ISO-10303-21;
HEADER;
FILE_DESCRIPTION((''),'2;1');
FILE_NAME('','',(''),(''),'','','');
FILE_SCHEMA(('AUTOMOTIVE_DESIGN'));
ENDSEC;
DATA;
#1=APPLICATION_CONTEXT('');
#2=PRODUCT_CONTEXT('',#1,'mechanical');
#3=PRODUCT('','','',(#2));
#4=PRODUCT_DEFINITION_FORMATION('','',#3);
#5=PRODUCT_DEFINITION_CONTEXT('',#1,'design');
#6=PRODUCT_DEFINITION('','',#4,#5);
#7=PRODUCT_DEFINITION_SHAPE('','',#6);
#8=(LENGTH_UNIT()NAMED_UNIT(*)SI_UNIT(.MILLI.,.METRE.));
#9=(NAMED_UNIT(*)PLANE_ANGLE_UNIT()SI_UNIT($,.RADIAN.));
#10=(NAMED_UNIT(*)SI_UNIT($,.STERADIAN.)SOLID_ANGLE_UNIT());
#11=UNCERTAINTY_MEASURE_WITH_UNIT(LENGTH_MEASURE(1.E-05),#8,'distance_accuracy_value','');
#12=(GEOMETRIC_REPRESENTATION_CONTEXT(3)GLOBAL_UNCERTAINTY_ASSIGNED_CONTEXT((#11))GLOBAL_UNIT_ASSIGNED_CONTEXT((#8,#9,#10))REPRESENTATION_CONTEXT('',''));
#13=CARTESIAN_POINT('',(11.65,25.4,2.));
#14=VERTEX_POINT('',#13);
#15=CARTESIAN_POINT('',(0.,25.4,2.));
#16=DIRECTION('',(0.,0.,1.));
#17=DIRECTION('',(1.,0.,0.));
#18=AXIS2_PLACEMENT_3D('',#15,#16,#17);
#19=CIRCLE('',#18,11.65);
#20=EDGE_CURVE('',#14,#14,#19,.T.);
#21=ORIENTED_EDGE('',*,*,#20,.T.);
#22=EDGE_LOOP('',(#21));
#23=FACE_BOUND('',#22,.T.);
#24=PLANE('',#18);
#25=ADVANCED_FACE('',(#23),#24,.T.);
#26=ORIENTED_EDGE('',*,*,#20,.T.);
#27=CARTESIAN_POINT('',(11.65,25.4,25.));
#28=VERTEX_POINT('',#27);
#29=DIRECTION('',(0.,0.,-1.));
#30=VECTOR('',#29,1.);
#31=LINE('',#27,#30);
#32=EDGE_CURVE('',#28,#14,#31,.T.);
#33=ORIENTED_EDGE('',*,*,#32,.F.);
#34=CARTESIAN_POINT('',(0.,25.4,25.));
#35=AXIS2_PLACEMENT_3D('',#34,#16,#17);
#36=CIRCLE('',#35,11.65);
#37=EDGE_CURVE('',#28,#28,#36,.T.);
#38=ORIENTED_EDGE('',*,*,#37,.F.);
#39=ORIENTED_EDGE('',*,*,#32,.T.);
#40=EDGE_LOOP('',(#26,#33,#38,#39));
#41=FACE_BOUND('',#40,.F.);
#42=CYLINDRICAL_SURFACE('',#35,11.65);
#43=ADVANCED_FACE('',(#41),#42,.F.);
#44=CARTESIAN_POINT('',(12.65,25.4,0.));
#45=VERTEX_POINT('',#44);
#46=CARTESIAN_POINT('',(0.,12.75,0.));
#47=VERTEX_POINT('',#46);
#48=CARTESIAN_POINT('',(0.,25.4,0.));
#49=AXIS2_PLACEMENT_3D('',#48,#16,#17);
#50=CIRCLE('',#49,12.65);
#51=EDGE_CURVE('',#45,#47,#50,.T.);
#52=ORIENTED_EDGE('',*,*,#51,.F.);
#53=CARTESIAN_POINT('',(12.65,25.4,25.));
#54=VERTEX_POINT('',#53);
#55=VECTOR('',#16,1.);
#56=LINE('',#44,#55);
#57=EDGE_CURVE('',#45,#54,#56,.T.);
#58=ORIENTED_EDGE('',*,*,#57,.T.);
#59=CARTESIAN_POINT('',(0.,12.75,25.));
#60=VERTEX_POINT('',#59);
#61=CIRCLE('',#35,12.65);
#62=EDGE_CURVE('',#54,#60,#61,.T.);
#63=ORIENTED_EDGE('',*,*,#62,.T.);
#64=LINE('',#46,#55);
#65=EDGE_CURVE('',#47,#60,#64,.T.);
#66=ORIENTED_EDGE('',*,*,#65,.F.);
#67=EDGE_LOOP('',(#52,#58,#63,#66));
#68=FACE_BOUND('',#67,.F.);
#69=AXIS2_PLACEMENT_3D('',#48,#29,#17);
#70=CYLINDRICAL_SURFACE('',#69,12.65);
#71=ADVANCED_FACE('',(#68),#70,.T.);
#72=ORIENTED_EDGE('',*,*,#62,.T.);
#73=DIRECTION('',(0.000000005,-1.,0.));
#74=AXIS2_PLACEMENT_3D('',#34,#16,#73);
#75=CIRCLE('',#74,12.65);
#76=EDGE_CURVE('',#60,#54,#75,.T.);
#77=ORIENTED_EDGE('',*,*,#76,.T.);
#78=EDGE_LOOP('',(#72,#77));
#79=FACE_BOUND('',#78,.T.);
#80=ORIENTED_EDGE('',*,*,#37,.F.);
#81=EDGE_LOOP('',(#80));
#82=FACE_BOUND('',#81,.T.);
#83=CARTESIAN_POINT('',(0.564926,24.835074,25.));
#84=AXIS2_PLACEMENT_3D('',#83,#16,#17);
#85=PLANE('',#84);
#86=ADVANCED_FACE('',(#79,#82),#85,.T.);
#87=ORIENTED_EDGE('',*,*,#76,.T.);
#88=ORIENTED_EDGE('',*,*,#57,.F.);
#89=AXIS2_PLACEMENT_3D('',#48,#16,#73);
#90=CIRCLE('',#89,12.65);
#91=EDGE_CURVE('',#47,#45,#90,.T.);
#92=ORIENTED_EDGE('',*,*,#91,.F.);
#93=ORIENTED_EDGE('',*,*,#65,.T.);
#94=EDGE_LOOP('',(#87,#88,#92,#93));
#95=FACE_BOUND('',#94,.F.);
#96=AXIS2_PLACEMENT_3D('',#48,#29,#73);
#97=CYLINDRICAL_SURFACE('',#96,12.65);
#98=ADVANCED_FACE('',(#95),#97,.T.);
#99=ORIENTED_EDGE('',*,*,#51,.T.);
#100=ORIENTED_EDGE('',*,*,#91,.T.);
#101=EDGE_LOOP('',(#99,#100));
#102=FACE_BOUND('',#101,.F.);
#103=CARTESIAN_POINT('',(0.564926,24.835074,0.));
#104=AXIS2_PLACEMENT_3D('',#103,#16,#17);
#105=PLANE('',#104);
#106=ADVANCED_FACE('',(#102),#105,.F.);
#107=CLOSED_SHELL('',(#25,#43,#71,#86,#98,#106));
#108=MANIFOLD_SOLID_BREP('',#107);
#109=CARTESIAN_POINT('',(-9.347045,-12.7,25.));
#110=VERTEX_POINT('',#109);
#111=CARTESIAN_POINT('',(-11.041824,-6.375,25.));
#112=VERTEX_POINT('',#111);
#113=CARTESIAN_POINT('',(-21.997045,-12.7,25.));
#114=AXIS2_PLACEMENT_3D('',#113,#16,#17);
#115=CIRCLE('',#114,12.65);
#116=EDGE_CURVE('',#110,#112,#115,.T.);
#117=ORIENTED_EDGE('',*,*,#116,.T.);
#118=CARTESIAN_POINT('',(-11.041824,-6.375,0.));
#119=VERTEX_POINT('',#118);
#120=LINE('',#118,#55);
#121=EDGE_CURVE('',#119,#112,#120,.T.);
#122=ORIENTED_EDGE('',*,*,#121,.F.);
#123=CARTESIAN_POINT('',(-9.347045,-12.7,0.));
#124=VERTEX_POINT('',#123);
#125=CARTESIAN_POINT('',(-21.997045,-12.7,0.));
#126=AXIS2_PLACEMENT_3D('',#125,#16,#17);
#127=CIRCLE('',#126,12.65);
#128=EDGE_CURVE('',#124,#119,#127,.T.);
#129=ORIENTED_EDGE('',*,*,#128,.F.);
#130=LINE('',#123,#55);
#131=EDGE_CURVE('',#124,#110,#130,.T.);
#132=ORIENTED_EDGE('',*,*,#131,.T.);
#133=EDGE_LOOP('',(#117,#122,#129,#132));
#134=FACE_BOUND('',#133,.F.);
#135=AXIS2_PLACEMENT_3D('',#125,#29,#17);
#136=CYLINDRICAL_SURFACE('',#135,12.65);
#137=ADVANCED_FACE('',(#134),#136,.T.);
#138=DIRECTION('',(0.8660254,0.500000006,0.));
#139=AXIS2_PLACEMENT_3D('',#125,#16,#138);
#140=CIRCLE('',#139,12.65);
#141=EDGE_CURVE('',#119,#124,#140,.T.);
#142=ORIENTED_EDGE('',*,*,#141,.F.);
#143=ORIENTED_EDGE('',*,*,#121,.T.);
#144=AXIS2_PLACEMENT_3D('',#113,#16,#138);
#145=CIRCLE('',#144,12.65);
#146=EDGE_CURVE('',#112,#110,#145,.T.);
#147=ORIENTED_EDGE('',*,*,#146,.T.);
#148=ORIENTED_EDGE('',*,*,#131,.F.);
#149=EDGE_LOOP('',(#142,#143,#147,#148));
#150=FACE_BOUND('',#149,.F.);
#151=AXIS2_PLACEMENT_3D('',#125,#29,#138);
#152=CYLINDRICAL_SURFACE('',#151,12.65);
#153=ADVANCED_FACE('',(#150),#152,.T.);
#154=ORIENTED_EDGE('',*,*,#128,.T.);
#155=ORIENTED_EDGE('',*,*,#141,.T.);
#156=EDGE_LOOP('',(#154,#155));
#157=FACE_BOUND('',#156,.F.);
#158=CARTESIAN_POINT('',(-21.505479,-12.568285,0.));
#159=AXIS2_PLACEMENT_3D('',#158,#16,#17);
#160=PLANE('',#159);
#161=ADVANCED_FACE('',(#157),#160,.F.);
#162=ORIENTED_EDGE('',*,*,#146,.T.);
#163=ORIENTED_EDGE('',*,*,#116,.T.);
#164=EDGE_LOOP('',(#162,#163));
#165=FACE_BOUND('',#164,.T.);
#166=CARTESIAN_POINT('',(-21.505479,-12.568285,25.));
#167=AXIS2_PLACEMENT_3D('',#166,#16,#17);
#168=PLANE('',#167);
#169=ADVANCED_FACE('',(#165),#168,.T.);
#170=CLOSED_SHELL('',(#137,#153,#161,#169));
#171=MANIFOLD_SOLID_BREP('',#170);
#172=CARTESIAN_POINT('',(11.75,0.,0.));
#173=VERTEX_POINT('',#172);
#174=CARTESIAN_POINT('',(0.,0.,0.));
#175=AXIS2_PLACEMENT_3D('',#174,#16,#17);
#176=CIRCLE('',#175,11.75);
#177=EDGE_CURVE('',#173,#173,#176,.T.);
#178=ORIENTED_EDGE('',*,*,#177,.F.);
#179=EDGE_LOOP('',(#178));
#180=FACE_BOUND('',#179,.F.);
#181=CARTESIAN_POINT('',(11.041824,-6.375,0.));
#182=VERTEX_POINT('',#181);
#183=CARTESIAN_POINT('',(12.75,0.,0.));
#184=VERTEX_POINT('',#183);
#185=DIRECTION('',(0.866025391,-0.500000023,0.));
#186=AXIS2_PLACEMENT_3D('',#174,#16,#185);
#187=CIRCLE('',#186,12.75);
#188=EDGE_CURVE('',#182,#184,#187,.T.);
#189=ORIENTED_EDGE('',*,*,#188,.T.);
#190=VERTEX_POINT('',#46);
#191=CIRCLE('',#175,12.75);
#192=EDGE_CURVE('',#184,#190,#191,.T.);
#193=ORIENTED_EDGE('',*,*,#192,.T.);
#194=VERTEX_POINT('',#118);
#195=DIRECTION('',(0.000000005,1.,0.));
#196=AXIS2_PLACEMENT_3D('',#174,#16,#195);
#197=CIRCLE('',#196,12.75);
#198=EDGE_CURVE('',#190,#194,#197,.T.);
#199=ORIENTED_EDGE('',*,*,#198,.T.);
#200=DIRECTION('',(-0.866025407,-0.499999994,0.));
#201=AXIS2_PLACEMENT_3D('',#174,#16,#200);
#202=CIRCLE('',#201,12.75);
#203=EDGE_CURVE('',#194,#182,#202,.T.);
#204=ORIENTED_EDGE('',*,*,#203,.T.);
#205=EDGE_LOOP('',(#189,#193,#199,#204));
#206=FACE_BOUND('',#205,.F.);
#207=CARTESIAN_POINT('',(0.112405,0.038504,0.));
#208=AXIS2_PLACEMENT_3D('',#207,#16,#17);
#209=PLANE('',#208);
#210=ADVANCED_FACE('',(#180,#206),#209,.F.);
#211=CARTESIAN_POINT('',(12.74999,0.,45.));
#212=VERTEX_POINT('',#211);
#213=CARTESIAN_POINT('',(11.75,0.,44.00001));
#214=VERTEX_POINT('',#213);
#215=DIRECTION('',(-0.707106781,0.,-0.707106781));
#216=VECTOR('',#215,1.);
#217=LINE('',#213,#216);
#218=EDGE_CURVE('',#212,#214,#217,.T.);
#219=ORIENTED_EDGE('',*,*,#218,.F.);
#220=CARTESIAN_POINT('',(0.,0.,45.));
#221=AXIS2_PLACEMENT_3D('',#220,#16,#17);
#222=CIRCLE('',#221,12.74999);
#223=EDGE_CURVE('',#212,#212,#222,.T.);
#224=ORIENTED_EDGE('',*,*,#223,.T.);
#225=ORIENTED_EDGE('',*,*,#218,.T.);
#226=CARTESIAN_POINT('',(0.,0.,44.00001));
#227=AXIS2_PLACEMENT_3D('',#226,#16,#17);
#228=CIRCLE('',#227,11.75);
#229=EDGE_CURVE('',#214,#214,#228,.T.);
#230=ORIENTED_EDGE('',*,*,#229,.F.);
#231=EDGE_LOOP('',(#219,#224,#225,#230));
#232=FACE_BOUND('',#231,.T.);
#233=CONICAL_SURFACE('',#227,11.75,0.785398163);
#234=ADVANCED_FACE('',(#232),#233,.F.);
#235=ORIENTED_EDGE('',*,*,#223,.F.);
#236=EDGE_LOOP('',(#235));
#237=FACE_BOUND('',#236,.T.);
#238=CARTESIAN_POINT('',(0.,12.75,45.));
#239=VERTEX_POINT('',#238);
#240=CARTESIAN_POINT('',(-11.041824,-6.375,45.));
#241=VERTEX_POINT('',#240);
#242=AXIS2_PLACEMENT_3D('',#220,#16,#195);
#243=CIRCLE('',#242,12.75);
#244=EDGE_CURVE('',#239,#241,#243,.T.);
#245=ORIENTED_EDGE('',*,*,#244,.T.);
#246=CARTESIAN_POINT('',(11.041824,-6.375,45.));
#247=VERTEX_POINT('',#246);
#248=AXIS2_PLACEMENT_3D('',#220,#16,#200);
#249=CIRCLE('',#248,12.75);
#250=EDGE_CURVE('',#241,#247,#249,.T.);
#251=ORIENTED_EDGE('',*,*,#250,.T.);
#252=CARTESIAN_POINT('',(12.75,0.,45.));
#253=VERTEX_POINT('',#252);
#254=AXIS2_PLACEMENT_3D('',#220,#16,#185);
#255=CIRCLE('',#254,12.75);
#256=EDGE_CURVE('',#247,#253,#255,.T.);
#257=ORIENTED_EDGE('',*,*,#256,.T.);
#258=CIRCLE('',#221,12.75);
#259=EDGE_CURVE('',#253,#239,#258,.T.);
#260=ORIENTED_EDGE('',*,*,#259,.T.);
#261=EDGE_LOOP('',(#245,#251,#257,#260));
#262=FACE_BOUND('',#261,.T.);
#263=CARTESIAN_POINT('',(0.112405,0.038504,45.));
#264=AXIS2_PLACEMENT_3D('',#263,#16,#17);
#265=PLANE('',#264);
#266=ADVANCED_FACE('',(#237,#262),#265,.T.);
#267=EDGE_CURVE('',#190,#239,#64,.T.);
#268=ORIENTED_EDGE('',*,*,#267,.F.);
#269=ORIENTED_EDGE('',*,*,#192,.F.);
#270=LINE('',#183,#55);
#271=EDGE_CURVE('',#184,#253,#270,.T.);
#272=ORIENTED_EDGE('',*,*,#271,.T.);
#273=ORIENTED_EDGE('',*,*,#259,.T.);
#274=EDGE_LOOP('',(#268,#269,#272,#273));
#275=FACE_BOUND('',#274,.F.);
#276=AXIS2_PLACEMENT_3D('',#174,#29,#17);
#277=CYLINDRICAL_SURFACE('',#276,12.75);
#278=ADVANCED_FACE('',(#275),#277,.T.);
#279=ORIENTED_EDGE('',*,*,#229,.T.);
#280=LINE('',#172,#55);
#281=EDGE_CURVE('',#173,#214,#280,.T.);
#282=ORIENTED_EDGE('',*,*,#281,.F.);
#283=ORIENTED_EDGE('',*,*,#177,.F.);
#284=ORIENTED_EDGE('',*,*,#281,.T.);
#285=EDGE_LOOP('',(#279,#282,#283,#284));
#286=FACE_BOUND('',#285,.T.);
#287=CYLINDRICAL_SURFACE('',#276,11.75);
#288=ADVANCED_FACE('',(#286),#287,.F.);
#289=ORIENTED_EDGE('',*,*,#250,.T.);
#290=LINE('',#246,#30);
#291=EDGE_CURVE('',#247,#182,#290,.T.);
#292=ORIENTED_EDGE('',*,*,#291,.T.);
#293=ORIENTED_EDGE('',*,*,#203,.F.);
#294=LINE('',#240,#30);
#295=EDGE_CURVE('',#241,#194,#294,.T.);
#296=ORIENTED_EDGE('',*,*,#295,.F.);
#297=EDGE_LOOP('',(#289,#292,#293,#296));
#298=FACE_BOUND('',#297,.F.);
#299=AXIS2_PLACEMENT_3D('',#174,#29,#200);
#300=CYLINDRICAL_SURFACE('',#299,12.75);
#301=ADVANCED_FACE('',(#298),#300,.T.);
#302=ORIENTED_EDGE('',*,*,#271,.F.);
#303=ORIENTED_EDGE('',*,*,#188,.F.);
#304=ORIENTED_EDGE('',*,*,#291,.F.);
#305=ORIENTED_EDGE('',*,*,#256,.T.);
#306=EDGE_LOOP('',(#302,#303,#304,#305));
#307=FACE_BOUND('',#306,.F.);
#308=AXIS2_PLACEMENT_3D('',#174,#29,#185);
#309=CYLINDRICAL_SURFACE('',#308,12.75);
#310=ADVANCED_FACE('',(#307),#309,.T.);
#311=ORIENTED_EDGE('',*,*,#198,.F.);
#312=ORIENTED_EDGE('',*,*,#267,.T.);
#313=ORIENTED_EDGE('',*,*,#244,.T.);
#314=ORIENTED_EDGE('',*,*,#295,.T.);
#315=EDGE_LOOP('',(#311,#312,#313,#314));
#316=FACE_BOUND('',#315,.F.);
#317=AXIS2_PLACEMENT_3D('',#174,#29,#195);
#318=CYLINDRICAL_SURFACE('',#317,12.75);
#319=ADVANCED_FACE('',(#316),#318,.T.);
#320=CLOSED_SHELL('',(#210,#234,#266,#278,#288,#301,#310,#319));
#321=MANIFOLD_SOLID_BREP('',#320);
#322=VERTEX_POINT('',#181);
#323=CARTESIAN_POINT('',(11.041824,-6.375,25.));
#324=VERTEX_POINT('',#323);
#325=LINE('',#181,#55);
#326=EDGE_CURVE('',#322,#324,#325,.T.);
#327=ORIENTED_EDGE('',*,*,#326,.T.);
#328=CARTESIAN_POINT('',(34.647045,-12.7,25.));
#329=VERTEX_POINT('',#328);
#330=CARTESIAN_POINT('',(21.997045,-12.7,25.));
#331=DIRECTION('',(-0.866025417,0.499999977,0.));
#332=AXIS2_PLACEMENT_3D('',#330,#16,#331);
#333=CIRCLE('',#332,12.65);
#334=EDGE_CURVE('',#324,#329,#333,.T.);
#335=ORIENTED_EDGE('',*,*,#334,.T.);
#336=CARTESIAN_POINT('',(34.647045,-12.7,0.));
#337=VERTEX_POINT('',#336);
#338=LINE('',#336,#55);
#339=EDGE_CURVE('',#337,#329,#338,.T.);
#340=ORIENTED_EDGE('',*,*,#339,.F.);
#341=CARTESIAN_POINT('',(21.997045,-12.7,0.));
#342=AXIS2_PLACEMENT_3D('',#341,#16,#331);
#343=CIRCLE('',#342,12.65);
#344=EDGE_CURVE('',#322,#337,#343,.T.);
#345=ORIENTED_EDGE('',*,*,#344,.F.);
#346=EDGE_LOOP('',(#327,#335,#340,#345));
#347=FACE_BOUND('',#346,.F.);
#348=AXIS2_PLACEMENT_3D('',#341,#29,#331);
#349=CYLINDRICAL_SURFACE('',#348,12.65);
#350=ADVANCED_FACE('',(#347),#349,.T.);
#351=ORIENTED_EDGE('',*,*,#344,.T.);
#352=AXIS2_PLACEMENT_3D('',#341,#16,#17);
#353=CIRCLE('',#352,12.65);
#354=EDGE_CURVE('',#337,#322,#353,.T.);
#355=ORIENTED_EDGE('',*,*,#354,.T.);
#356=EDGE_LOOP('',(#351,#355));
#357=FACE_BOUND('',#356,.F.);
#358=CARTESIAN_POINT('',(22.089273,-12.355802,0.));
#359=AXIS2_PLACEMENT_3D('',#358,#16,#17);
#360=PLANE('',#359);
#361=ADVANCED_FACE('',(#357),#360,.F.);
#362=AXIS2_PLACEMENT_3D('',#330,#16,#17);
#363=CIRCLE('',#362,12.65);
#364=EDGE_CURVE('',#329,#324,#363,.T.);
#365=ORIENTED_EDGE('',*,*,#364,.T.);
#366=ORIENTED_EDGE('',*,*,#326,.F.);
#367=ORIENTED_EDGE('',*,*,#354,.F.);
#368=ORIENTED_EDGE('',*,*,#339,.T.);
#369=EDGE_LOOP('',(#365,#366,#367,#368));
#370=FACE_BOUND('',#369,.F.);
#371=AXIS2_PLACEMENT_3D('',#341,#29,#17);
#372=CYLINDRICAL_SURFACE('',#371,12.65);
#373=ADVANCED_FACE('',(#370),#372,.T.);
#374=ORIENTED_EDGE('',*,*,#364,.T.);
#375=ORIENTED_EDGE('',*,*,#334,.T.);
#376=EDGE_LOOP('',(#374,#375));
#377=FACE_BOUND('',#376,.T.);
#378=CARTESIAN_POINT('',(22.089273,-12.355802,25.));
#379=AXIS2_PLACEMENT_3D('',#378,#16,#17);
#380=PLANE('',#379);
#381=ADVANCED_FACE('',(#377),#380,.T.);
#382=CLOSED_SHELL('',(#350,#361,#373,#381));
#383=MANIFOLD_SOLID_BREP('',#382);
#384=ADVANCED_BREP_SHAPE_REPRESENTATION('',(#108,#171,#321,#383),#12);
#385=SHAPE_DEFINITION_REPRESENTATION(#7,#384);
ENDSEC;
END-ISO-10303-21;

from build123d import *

# Parameters (mm, degrees)
F0_R     = 11.75
F1_DEPTH = 45
F2_DEPTH = 25
F3_SIZE  = 0.99999
F4_R     = 11.65
F5_DEPTH = 23


# Not quite as in the source:
# - a fillet or chamfer is up to 0.001 mm smaller than in the source, because OpenCascade refuses the exact size
# - a feature names something its author has since deleted; it is built from what else it names


with BuildPart() as f1:
    # F0 (on Top) → F1 (new body)
    with BuildSketch(Plane.XY):
        with BuildLine():
            ThreePointArc((11.0418237302, -6.3750002911), (12.3155542417, -3.2999429874), (12.75, 0))
            ThreePointArc((12.75, 0), (9.0156114816, 9.0156114386), (6.08e-08, 12.75))
            ThreePointArc((6.08e-08, 12.75), (-11.0418238613, 6.375000064), (-11.0418239417, -6.3749999247))
            ThreePointArc((-11.0418239417, -6.3749999247), (-2.116e-07, -12.75), (11.0418237302, -6.3750002911))
        make_face()
        Circle(F0_R, mode=Mode.SUBTRACT)
    extrude(amount=F1_DEPTH)

    # F0 (on Top) → F2 (join)
    with BuildSketch(Plane.XY):
        with BuildLine():
            ThreePointArc((11.0418237302, -6.3750002911), (12.3155542417, -3.2999429874), (12.75, 0))
            ThreePointArc((12.75, 0), (9.0156114816, 9.0156114386), (6.08e-08, 12.75))
            ThreePointArc((6.08e-08, 12.75), (-11.0418238613, 6.375000064), (-11.0418239417, -6.3749999247))
            ThreePointArc((-11.0418239417, -6.3749999247), (-2.116e-07, -12.75), (11.0418237302, -6.3750002911))
        make_face()
        Circle(F0_R, mode=Mode.SUBTRACT)
    extrude(amount=F2_DEPTH)

    # F3 (size 1 in the source; OpenCascade refuses exactly that, so slightly less here)
    f3_edges = [f1.edges().sort_by_distance(p)[0] for p in [
        (-11.75, 0, 45),
    ]]
    chamfer(f3_edges, length=F3_SIZE)


with BuildPart() as f2:
    # F0 (on Top) → F2, piece 2 (new body)
    with BuildSketch(Plane.XY):
        with BuildLine():
            ThreePointArc((34.6470452561, -12.7), (25.2711060143, -0.4810382539), (11.0418237302, -6.3750002911))
            ThreePointArc((11.0418237302, -6.3750002911), (18.7229844979, -24.9189617461), (34.6470452561, -12.7))
        make_face()
    extrude(amount=F2_DEPTH)


with BuildPart() as f2b:
    # F0 (on Top) → F2, piece 3 (new body)
    with BuildSketch(Plane.XY):
        with BuildLine():
            ThreePointArc((-9.3470452561, -12.7), (-9.7780835648, -9.4259390375), (-11.0418239417, -6.3749999247))
            ThreePointArc((-11.0418239417, -6.3749999247), (-34.2160069474, -15.9740609625), (-9.3470452561, -12.7))
        make_face()
    extrude(amount=F2_DEPTH)


with BuildPart() as f2c:
    # F0 (on Top) → F2, piece 4 (new body)
    with BuildSketch(Plane.XY):
        with BuildLine():
            ThreePointArc((12.65, 25.4), (-8.9449008035, 34.3449007605), (6.08e-08, 12.75))
            ThreePointArc((6.08e-08, 12.75), (8.9449008035, 16.4550992395), (12.65, 25.4))
        make_face()
    extrude(amount=F2_DEPTH)

    # F4 (on face) → F5 (cut)
    with BuildSketch(Plane.XY.offset(25)):
        with Locations((0, 25.4)):
            Circle(F4_R)
    extrude(amount=-F5_DEPTH, mode=Mode.SUBTRACT)


solid = Compound([f1.part, f2.part, f2b.part, f2c.part])
